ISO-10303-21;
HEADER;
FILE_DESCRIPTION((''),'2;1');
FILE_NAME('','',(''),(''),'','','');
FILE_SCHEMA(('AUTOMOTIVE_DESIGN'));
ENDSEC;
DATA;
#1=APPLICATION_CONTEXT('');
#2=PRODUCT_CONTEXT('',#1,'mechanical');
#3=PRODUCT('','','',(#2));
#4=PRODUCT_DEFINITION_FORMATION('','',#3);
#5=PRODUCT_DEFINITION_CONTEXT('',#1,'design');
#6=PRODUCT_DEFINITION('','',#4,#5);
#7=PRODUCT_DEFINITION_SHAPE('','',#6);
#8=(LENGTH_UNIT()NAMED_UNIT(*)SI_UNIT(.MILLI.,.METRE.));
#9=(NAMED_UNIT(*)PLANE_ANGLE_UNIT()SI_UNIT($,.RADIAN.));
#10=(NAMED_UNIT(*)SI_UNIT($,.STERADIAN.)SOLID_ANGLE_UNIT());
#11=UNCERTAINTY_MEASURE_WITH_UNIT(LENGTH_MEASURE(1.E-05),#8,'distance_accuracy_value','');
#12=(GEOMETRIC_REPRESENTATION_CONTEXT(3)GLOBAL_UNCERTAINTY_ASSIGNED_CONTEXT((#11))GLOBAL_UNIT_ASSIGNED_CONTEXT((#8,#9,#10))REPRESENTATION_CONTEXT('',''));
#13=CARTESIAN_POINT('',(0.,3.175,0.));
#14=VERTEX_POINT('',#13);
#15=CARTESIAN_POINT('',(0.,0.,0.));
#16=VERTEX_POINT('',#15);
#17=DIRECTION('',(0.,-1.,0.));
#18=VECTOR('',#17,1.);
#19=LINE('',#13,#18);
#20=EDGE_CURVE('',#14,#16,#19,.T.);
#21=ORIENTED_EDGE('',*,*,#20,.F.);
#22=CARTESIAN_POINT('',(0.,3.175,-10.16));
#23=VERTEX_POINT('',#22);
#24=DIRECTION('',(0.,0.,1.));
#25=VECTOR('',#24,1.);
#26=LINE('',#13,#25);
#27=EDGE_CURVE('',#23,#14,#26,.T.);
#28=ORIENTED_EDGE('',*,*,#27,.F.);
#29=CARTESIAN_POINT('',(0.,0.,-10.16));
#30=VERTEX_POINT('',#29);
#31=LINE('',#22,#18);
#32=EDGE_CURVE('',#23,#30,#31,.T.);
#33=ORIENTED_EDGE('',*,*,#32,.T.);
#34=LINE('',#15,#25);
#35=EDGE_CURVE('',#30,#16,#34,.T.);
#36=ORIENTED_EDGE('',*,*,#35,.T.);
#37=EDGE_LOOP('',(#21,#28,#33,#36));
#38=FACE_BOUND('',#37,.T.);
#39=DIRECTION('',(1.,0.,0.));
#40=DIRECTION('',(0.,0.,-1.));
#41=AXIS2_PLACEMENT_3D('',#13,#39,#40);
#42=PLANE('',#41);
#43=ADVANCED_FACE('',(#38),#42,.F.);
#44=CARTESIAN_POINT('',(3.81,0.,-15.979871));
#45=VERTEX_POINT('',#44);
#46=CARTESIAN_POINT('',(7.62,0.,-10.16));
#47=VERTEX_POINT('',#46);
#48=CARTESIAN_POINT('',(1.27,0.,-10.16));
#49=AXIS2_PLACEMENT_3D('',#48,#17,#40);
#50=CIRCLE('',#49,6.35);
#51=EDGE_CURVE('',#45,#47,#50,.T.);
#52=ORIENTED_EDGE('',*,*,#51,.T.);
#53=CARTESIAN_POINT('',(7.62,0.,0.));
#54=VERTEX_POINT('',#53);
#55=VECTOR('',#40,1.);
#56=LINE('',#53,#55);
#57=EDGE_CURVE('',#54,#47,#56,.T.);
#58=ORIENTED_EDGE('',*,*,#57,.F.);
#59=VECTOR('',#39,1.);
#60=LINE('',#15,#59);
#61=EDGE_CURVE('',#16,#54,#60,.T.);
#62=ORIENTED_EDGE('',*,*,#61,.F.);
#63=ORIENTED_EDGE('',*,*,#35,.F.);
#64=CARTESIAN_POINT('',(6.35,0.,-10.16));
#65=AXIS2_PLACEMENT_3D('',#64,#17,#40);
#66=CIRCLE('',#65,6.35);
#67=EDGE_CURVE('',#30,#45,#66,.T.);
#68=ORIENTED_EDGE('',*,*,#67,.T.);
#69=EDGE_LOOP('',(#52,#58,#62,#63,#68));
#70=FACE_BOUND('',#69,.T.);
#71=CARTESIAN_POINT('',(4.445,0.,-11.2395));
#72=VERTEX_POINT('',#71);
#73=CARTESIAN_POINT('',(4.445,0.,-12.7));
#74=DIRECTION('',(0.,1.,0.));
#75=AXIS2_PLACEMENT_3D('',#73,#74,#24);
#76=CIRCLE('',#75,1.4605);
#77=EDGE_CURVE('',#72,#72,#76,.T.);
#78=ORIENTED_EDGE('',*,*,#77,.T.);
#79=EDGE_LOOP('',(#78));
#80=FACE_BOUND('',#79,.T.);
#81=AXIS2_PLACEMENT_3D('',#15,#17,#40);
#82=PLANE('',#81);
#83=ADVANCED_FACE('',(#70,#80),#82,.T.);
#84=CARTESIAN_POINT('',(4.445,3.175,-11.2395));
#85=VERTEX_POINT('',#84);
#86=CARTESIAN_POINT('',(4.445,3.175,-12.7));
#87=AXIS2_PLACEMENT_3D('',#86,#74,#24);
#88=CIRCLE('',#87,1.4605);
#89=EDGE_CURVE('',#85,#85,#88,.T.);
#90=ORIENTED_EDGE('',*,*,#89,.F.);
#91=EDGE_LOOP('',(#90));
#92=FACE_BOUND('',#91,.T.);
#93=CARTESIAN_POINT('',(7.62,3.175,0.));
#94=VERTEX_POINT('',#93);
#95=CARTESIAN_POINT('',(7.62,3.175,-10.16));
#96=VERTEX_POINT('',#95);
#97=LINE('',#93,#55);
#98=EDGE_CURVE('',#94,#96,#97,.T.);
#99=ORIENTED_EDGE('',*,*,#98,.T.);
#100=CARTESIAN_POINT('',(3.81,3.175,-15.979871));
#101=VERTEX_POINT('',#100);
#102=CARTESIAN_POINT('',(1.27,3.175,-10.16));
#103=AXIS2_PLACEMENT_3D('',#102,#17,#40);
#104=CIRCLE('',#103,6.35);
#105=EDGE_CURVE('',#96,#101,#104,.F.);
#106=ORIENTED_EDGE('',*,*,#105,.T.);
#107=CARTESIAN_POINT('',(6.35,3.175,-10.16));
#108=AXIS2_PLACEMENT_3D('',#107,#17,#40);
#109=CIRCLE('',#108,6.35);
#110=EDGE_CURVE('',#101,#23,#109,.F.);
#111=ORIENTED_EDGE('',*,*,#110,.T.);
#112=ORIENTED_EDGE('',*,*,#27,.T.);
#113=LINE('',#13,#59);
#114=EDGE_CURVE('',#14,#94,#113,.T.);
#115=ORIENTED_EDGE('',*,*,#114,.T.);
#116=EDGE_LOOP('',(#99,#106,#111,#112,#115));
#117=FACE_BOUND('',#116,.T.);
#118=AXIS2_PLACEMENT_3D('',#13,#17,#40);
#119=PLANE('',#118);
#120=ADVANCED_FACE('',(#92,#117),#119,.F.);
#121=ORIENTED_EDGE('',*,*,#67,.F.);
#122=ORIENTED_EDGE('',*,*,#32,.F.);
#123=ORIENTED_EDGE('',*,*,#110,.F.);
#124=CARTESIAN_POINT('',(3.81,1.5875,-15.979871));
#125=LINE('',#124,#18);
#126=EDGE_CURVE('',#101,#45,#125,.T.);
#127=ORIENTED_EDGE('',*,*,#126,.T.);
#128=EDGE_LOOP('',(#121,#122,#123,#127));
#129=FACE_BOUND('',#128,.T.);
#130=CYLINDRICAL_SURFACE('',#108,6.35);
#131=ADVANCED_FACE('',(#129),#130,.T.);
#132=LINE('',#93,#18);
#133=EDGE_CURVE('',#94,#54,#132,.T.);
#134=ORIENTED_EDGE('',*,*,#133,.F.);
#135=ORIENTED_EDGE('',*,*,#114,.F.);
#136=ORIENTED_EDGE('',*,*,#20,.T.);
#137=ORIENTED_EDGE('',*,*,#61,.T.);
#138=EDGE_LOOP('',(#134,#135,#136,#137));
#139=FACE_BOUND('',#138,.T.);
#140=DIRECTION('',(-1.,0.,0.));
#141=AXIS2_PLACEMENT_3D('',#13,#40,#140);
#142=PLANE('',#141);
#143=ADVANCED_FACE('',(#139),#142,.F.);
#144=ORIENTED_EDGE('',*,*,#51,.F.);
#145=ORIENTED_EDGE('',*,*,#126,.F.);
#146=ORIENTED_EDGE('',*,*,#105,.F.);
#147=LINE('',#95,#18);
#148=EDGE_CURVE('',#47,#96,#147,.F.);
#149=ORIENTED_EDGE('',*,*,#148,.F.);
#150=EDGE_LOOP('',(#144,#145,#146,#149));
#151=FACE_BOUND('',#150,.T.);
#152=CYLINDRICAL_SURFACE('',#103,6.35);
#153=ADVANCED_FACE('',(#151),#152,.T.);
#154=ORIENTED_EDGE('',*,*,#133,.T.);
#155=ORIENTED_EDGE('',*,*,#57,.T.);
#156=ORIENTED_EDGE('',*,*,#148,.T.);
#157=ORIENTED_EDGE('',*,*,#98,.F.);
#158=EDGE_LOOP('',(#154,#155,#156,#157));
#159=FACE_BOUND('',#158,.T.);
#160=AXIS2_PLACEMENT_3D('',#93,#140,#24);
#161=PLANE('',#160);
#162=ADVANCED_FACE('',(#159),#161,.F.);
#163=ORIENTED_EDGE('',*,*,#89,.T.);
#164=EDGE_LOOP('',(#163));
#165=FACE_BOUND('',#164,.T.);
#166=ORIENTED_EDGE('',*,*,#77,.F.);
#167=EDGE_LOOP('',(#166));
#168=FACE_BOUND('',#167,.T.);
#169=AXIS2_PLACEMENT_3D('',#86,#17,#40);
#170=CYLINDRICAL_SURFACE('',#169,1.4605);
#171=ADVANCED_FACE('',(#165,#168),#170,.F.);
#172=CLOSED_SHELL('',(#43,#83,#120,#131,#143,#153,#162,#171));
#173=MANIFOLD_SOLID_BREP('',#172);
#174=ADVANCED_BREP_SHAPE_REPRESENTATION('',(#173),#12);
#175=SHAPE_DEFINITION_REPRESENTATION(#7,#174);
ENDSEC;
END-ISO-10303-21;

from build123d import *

# Parameters (mm, degrees)
SKETCH1_W           = 7.62
SKETCH1_H           = 16.51
SKETCH1_R           = 1.4605
BOSS_EXTRUDE1_DEPTH = 3.175
FILLET3_R           = 6.35


with BuildPart() as part:
    # Sketch1 → Boss-Extrude1 (new body)
    with BuildSketch(Plane(origin=(0, 0, 0), x_dir=(1, 0, 0), z_dir=(0, 1, 0))):
        with Locations((3.81, 8.255)):
            Rectangle(SKETCH1_W, SKETCH1_H)
        with Locations(Location((4.445, 12.7, 0), (0, 0, 270))):
            Circle(SKETCH1_R, mode=Mode.SUBTRACT)
    extrude(amount=BOSS_EXTRUDE1_DEPTH)

    # Fillet3
    # the kernel refuses this fillet: 6.35 mm, written as the material it takes off along each edge
    with BuildSketch(Plane(origin=(0, -15.875, -16.51), x_dir=(1, 0, 0), z_dir=(0, 1, 0)), Plane(origin=(7.62, -15.875, -16.51), x_dir=(0, 0, 1), z_dir=(0, 1, 0))) as fillet3_piece_1:
        with BuildLine():
            CenterArc((FILLET3_R, -FILLET3_R), FILLET3_R, 90, 90)
            Line((0, -FILLET3_R), (0, 0))
            Line((0, 0), (FILLET3_R, 0))
        make_face()
    extrude(amount=34.925, mode=Mode.SUBTRACT)


solid = part.part
